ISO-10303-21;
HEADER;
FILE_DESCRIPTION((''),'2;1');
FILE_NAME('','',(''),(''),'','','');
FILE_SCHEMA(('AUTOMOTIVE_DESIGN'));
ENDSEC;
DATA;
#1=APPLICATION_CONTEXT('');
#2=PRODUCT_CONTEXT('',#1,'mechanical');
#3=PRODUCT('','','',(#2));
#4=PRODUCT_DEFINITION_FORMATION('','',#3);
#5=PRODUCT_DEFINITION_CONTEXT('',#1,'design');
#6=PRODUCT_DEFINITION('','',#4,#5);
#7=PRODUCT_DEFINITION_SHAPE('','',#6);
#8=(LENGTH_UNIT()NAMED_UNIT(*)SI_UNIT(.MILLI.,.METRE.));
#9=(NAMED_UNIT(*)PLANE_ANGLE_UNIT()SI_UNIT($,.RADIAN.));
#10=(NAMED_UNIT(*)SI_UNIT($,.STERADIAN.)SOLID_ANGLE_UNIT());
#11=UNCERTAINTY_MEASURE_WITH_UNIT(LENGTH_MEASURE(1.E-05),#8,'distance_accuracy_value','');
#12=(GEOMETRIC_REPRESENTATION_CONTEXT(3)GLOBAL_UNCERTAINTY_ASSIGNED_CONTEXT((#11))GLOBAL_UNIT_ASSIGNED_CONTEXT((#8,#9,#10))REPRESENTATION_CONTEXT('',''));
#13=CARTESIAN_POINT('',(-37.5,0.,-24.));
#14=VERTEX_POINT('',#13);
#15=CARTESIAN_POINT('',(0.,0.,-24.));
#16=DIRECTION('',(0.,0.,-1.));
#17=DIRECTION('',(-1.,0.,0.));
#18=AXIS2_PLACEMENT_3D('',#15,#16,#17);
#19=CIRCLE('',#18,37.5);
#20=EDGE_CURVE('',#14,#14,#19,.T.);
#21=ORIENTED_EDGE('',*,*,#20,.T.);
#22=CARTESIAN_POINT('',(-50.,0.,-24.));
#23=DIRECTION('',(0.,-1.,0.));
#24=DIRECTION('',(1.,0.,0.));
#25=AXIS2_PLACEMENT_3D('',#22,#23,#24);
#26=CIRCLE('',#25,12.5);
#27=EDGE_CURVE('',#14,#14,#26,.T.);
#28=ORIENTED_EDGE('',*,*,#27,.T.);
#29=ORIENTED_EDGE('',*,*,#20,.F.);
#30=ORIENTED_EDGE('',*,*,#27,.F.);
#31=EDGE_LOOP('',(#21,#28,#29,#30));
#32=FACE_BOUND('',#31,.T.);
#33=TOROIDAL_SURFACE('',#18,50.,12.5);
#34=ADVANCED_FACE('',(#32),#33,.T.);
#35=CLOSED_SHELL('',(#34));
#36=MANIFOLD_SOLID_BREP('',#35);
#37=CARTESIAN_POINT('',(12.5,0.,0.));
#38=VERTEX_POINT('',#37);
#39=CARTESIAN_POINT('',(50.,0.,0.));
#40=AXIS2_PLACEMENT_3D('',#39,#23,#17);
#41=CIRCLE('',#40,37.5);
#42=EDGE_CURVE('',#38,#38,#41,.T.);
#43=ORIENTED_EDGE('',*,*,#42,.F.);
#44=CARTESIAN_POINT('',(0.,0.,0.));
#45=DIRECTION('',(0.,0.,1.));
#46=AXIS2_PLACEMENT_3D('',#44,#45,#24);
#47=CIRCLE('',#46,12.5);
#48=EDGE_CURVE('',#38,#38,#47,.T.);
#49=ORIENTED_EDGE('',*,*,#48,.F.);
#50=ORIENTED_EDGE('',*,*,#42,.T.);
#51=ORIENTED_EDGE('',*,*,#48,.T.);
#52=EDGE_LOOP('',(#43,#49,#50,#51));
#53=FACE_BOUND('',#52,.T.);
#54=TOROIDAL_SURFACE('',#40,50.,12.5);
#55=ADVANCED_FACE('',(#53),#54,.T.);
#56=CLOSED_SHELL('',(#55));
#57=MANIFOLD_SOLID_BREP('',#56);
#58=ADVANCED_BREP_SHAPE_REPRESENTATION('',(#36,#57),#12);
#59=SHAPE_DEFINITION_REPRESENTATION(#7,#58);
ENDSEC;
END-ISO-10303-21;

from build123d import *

# Parameters (mm, degrees)
F0_R = 12.5
F2_R = 12.5


# Not quite as in the source:
# - a feature names something its author has since deleted; it is built from what else it names


with BuildPart() as f1:
    # F0 (on Front) → F1 (revolve)
    with BuildSketch(Plane.XZ):
        with Locations((-50, -24)):
            Circle(F0_R)
    revolve(axis=Axis((0, 0, -0.2122972161), (0, 0, -1)))


with BuildPart() as f3:
    # F2 (on Top) → F3 (revolve)
    with BuildSketch(Plane.XY):
        Circle(F2_R)
    revolve(axis=Axis((50, -5.6015, 0), (0, -1, 0)))


solid = Compound([f1.part, f3.part])
